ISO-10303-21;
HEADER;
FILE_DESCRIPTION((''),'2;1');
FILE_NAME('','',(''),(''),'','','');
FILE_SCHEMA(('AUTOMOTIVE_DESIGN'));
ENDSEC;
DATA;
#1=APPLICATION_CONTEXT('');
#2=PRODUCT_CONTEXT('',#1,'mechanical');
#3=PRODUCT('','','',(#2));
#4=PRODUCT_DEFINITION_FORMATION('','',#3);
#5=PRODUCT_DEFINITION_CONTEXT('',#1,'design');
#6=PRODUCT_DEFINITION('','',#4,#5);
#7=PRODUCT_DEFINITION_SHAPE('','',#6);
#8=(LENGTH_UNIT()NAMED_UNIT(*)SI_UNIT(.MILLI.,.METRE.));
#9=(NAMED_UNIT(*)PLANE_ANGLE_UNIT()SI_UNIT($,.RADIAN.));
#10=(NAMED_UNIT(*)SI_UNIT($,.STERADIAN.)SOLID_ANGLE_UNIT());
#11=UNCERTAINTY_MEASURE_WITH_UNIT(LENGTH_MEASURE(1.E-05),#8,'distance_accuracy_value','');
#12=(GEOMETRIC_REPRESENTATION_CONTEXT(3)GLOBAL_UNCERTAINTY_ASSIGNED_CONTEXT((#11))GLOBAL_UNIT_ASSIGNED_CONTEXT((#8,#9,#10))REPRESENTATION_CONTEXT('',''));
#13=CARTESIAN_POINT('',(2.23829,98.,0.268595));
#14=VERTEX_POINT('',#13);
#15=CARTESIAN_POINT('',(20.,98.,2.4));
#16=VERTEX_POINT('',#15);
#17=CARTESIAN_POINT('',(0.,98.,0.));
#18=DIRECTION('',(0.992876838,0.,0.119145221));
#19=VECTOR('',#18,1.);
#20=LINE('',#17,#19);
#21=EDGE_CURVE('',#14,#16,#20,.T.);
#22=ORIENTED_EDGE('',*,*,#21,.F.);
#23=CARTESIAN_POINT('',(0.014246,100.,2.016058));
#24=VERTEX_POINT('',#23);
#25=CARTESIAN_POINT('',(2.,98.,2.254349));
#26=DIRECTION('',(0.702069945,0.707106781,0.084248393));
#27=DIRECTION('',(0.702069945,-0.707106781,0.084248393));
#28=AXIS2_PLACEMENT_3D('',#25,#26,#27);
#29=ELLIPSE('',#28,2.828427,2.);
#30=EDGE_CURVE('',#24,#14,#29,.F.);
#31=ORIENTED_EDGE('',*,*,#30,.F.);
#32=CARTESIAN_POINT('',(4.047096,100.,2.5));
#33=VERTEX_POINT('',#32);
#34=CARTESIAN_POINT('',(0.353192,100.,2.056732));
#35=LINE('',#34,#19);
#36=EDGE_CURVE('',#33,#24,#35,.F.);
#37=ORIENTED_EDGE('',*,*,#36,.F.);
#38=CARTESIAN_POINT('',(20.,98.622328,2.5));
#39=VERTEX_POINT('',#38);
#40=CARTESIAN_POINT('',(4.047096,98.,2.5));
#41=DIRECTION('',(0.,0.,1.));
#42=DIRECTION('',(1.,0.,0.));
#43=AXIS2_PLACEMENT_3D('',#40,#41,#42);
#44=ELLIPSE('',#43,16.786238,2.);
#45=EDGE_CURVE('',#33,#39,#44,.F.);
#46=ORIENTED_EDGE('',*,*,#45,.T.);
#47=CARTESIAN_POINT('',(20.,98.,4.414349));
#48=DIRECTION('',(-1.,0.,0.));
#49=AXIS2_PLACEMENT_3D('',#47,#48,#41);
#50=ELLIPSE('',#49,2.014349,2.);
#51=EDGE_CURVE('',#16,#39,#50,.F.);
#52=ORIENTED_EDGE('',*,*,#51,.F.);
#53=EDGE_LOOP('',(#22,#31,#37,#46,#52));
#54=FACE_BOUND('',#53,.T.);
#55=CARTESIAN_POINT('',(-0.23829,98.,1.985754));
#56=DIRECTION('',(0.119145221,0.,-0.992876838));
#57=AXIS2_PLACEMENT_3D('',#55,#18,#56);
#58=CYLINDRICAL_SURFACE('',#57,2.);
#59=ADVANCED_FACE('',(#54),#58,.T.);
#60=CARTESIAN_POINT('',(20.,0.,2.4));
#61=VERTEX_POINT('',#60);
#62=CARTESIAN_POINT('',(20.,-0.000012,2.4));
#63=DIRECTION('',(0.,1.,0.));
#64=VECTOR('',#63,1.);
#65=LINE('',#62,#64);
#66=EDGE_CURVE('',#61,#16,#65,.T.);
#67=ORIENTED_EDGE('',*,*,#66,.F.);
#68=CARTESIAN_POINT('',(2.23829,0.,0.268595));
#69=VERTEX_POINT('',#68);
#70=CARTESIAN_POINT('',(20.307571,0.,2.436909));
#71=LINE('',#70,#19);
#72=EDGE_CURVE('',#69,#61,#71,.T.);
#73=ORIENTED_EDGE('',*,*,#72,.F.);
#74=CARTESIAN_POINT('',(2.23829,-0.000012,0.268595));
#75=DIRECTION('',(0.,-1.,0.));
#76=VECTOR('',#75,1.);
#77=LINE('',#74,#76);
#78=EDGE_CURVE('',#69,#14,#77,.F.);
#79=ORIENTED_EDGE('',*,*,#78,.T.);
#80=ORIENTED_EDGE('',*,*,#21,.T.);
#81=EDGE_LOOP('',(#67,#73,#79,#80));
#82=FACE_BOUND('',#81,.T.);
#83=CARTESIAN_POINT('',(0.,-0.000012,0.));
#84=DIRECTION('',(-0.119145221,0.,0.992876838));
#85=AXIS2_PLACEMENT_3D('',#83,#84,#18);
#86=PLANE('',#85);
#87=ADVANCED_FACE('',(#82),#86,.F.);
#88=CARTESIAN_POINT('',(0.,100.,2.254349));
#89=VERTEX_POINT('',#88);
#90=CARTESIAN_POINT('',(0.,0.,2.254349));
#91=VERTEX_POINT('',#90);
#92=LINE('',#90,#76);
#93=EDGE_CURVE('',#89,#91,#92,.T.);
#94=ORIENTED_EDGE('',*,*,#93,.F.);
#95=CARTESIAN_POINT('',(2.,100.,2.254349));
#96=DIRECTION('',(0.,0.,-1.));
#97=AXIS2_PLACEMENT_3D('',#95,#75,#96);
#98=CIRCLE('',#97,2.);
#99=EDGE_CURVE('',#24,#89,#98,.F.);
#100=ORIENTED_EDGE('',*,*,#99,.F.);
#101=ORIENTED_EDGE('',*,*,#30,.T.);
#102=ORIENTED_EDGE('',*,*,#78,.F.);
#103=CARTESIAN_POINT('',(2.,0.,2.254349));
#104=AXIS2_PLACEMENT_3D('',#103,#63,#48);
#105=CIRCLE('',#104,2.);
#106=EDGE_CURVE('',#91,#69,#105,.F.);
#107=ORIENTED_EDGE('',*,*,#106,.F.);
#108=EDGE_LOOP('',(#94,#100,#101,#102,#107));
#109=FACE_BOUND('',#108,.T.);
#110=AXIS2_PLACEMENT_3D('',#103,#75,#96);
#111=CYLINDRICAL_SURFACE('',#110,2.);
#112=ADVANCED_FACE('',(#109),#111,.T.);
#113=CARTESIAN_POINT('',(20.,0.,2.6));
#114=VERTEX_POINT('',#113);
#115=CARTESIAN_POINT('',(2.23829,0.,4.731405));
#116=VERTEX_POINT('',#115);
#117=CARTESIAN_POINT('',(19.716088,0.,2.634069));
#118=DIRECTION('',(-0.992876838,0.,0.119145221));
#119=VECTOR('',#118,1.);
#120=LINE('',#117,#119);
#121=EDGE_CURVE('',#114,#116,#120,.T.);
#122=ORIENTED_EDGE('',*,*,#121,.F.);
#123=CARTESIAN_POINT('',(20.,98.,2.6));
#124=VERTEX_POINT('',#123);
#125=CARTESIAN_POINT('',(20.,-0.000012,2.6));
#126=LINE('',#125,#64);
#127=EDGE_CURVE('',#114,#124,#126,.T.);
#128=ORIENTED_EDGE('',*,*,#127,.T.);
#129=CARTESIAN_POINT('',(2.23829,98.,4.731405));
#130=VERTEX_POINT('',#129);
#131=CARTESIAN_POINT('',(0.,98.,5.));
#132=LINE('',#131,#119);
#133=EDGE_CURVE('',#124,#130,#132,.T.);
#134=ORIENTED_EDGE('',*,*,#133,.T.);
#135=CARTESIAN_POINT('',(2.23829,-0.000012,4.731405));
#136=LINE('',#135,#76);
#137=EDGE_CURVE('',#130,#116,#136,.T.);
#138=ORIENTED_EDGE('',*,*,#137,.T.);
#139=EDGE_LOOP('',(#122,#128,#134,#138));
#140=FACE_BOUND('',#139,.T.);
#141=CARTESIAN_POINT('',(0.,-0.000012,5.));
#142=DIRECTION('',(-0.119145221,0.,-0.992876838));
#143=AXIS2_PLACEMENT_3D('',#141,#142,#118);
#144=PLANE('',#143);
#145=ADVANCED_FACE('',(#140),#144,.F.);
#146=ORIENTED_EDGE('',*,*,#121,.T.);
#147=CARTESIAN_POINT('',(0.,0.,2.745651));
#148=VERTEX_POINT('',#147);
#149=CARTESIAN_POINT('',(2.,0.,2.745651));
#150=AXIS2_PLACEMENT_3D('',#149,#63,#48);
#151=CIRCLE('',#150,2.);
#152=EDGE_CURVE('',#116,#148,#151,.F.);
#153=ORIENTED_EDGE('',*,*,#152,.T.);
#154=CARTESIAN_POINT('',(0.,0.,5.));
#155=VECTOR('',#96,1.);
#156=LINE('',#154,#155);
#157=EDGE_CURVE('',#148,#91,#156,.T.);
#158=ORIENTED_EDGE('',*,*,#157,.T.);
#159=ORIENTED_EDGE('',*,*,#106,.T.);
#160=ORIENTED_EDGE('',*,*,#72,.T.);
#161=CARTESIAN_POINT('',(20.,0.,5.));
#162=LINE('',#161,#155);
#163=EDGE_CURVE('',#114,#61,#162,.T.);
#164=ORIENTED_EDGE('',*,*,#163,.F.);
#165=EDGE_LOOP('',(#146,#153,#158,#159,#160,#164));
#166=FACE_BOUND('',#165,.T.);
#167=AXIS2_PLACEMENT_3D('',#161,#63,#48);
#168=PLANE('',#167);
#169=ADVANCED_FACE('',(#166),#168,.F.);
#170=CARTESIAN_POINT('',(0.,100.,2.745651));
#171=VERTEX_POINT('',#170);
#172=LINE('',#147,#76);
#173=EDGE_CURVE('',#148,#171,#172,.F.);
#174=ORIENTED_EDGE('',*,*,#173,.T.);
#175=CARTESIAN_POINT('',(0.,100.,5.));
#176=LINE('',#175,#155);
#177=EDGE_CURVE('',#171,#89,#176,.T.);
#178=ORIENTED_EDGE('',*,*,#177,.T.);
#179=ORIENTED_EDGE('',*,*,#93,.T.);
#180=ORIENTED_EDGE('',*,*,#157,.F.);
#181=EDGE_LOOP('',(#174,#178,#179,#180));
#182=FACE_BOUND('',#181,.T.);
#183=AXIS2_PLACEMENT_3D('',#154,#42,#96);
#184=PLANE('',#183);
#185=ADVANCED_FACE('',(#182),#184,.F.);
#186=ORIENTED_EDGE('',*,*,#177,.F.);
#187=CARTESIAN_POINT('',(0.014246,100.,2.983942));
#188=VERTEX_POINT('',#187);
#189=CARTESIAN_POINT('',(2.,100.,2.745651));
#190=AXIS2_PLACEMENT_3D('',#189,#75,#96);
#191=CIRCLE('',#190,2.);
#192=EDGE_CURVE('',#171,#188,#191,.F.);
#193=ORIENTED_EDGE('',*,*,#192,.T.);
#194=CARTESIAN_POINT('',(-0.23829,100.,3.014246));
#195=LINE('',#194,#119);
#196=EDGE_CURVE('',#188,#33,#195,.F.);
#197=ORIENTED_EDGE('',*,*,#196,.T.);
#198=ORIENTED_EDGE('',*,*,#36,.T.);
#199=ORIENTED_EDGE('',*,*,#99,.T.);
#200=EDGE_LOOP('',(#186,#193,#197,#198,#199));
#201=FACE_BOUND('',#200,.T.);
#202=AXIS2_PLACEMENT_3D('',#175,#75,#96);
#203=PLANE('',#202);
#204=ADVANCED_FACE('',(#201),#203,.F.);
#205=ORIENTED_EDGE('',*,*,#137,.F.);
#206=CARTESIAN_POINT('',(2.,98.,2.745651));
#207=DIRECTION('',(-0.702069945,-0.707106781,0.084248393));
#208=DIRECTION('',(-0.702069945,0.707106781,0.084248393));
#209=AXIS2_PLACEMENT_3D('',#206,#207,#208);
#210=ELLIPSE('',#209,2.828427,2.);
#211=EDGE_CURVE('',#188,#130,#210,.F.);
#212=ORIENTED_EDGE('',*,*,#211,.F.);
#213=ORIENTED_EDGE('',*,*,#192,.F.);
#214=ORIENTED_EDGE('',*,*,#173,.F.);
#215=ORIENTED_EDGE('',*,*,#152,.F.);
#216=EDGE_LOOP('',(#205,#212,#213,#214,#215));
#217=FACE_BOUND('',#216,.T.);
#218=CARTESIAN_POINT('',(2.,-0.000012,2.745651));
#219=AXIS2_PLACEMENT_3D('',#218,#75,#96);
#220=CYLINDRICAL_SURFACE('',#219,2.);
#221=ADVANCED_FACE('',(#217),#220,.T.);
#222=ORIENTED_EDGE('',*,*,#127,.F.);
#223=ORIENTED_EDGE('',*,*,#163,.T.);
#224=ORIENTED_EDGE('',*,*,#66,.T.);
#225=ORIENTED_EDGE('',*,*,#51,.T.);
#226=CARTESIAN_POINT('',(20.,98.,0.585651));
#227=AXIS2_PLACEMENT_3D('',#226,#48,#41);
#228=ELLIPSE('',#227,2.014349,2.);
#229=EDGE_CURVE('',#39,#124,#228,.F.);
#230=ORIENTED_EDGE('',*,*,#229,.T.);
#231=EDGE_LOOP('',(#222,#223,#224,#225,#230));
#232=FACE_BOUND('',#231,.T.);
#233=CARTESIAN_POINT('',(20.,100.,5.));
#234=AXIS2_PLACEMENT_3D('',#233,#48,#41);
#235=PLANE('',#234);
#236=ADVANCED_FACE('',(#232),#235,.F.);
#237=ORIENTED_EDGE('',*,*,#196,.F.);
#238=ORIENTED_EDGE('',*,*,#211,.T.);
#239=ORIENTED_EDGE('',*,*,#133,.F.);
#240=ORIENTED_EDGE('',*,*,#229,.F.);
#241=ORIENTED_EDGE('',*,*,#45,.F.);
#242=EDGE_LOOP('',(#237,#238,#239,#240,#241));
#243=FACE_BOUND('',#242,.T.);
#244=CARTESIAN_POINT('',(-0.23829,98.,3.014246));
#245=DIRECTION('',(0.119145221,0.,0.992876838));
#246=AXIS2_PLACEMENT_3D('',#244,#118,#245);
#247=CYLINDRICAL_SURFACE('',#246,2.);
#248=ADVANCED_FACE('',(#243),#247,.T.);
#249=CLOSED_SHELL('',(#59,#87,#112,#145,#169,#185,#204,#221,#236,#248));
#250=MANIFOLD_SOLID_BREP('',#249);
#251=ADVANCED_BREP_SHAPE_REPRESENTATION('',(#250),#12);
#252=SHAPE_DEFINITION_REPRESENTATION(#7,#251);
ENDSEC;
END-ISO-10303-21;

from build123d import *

# Parameters (mm, degrees)
SKETCH1_W               = 20
SKETCH1_H               = 100
BOSS_EXTRUDE1_DEPTH     = 5
CUT_EXTRUDE1_DEPTH      = 103.102889283
CUT_EXTRUDE1_DEPTH_BACK = 103.102889283
FILLET1_R               = 2


with BuildPart() as part:
    # Sketch1 → Boss-Extrude1 (new body)
    with BuildSketch(Plane.XY):
        with Locations((10, 50)):
            Rectangle(SKETCH1_W, SKETCH1_H)
    extrude(amount=BOSS_EXTRUDE1_DEPTH)

    # Sketch2 → Cut-Extrude1 (cut, two sides: drawn at the far end of the back side and taken through both)
    with BuildSketch(Plane(origin=(0, 0, 0), x_dir=(1, 0, 0), z_dir=(0, 1, 0)).offset(-CUT_EXTRUDE1_DEPTH_BACK)):
        Polygon((0, 0), (20, -2.4), (20, 0), align=None)
        Polygon((0, -5), (20, -2.6), (20, -5), align=None)
    extrude(amount=CUT_EXTRUDE1_DEPTH + CUT_EXTRUDE1_DEPTH_BACK, mode=Mode.SUBTRACT)

    # Fillet1
    # the kernel refuses this fillet: 2 mm, written as the material it takes off along each edge
    with BuildSketch(Plane(origin=(0, -5.635871325, 0), x_dir=(0, 0, 1), z_dir=(0, 1, 0))) as fillet1_piece_1:
        with BuildLine():
            CenterArc((FILLET1_R * 1.12717426496, FILLET1_R), FILLET1_R, 173.157226587, 96.842773413)
            Line((FILLET1_R * 0.134297426474, FILLET1_R * 1.11914522062), (0, 0))
            Line((0, 0), (FILLET1_R * 1.12717426496, 0))
        make_face()
    extrude(amount=111.27174265, mode=Mode.SUBTRACT)
    with BuildSketch(Plane(origin=(0, -5.635871325, 5), x_dir=(0, 0, -1), z_dir=(0, 1, 0))) as fillet1_piece_2:
        with BuildLine():
            CenterArc((FILLET1_R * 1.12717426496, -FILLET1_R), FILLET1_R, 90, 96.842773413)
            Line((FILLET1_R * 0.134297426474, -FILLET1_R * 1.11914522062), (0, 0))
            Line((0, 0), (FILLET1_R * 1.12717426496, 0))
        make_face()
    extrude(amount=111.27174265, mode=Mode.SUBTRACT)
    with BuildSketch(Plane(origin=(24.964384192, 100, 2.995726103), x_dir=(-0.11914522061843055, 0, 0.9928768384869221), z_dir=(-0.9928768384869221, 0, -0.11914522061843054))) as fillet1_piece_3:
        with BuildLine():
            CenterArc((FILLET1_R, -FILLET1_R), FILLET1_R, 90, 90)
            Line((0, -FILLET1_R), (0, 0))
            Line((0, 0), (FILLET1_R, 0))
        make_face()
    extrude(amount=30.143485299, mode=Mode.SUBTRACT)
    with BuildSketch(Plane(origin=(24.964384192, 100, 2.004273897), x_dir=(-0.11914522061843079, 0, -0.9928768384869221), z_dir=(-0.9928768384869221, 0, 0.11914522061843079))) as fillet1_piece_4:
        with BuildLine():
            CenterArc((FILLET1_R, FILLET1_R), FILLET1_R, 180, 90)
            Line((0, FILLET1_R), (0, 0))
            Line((0, 0), (FILLET1_R, 0))
        make_face()
    extrude(amount=30.143485299, mode=Mode.SUBTRACT)


solid = part.part
